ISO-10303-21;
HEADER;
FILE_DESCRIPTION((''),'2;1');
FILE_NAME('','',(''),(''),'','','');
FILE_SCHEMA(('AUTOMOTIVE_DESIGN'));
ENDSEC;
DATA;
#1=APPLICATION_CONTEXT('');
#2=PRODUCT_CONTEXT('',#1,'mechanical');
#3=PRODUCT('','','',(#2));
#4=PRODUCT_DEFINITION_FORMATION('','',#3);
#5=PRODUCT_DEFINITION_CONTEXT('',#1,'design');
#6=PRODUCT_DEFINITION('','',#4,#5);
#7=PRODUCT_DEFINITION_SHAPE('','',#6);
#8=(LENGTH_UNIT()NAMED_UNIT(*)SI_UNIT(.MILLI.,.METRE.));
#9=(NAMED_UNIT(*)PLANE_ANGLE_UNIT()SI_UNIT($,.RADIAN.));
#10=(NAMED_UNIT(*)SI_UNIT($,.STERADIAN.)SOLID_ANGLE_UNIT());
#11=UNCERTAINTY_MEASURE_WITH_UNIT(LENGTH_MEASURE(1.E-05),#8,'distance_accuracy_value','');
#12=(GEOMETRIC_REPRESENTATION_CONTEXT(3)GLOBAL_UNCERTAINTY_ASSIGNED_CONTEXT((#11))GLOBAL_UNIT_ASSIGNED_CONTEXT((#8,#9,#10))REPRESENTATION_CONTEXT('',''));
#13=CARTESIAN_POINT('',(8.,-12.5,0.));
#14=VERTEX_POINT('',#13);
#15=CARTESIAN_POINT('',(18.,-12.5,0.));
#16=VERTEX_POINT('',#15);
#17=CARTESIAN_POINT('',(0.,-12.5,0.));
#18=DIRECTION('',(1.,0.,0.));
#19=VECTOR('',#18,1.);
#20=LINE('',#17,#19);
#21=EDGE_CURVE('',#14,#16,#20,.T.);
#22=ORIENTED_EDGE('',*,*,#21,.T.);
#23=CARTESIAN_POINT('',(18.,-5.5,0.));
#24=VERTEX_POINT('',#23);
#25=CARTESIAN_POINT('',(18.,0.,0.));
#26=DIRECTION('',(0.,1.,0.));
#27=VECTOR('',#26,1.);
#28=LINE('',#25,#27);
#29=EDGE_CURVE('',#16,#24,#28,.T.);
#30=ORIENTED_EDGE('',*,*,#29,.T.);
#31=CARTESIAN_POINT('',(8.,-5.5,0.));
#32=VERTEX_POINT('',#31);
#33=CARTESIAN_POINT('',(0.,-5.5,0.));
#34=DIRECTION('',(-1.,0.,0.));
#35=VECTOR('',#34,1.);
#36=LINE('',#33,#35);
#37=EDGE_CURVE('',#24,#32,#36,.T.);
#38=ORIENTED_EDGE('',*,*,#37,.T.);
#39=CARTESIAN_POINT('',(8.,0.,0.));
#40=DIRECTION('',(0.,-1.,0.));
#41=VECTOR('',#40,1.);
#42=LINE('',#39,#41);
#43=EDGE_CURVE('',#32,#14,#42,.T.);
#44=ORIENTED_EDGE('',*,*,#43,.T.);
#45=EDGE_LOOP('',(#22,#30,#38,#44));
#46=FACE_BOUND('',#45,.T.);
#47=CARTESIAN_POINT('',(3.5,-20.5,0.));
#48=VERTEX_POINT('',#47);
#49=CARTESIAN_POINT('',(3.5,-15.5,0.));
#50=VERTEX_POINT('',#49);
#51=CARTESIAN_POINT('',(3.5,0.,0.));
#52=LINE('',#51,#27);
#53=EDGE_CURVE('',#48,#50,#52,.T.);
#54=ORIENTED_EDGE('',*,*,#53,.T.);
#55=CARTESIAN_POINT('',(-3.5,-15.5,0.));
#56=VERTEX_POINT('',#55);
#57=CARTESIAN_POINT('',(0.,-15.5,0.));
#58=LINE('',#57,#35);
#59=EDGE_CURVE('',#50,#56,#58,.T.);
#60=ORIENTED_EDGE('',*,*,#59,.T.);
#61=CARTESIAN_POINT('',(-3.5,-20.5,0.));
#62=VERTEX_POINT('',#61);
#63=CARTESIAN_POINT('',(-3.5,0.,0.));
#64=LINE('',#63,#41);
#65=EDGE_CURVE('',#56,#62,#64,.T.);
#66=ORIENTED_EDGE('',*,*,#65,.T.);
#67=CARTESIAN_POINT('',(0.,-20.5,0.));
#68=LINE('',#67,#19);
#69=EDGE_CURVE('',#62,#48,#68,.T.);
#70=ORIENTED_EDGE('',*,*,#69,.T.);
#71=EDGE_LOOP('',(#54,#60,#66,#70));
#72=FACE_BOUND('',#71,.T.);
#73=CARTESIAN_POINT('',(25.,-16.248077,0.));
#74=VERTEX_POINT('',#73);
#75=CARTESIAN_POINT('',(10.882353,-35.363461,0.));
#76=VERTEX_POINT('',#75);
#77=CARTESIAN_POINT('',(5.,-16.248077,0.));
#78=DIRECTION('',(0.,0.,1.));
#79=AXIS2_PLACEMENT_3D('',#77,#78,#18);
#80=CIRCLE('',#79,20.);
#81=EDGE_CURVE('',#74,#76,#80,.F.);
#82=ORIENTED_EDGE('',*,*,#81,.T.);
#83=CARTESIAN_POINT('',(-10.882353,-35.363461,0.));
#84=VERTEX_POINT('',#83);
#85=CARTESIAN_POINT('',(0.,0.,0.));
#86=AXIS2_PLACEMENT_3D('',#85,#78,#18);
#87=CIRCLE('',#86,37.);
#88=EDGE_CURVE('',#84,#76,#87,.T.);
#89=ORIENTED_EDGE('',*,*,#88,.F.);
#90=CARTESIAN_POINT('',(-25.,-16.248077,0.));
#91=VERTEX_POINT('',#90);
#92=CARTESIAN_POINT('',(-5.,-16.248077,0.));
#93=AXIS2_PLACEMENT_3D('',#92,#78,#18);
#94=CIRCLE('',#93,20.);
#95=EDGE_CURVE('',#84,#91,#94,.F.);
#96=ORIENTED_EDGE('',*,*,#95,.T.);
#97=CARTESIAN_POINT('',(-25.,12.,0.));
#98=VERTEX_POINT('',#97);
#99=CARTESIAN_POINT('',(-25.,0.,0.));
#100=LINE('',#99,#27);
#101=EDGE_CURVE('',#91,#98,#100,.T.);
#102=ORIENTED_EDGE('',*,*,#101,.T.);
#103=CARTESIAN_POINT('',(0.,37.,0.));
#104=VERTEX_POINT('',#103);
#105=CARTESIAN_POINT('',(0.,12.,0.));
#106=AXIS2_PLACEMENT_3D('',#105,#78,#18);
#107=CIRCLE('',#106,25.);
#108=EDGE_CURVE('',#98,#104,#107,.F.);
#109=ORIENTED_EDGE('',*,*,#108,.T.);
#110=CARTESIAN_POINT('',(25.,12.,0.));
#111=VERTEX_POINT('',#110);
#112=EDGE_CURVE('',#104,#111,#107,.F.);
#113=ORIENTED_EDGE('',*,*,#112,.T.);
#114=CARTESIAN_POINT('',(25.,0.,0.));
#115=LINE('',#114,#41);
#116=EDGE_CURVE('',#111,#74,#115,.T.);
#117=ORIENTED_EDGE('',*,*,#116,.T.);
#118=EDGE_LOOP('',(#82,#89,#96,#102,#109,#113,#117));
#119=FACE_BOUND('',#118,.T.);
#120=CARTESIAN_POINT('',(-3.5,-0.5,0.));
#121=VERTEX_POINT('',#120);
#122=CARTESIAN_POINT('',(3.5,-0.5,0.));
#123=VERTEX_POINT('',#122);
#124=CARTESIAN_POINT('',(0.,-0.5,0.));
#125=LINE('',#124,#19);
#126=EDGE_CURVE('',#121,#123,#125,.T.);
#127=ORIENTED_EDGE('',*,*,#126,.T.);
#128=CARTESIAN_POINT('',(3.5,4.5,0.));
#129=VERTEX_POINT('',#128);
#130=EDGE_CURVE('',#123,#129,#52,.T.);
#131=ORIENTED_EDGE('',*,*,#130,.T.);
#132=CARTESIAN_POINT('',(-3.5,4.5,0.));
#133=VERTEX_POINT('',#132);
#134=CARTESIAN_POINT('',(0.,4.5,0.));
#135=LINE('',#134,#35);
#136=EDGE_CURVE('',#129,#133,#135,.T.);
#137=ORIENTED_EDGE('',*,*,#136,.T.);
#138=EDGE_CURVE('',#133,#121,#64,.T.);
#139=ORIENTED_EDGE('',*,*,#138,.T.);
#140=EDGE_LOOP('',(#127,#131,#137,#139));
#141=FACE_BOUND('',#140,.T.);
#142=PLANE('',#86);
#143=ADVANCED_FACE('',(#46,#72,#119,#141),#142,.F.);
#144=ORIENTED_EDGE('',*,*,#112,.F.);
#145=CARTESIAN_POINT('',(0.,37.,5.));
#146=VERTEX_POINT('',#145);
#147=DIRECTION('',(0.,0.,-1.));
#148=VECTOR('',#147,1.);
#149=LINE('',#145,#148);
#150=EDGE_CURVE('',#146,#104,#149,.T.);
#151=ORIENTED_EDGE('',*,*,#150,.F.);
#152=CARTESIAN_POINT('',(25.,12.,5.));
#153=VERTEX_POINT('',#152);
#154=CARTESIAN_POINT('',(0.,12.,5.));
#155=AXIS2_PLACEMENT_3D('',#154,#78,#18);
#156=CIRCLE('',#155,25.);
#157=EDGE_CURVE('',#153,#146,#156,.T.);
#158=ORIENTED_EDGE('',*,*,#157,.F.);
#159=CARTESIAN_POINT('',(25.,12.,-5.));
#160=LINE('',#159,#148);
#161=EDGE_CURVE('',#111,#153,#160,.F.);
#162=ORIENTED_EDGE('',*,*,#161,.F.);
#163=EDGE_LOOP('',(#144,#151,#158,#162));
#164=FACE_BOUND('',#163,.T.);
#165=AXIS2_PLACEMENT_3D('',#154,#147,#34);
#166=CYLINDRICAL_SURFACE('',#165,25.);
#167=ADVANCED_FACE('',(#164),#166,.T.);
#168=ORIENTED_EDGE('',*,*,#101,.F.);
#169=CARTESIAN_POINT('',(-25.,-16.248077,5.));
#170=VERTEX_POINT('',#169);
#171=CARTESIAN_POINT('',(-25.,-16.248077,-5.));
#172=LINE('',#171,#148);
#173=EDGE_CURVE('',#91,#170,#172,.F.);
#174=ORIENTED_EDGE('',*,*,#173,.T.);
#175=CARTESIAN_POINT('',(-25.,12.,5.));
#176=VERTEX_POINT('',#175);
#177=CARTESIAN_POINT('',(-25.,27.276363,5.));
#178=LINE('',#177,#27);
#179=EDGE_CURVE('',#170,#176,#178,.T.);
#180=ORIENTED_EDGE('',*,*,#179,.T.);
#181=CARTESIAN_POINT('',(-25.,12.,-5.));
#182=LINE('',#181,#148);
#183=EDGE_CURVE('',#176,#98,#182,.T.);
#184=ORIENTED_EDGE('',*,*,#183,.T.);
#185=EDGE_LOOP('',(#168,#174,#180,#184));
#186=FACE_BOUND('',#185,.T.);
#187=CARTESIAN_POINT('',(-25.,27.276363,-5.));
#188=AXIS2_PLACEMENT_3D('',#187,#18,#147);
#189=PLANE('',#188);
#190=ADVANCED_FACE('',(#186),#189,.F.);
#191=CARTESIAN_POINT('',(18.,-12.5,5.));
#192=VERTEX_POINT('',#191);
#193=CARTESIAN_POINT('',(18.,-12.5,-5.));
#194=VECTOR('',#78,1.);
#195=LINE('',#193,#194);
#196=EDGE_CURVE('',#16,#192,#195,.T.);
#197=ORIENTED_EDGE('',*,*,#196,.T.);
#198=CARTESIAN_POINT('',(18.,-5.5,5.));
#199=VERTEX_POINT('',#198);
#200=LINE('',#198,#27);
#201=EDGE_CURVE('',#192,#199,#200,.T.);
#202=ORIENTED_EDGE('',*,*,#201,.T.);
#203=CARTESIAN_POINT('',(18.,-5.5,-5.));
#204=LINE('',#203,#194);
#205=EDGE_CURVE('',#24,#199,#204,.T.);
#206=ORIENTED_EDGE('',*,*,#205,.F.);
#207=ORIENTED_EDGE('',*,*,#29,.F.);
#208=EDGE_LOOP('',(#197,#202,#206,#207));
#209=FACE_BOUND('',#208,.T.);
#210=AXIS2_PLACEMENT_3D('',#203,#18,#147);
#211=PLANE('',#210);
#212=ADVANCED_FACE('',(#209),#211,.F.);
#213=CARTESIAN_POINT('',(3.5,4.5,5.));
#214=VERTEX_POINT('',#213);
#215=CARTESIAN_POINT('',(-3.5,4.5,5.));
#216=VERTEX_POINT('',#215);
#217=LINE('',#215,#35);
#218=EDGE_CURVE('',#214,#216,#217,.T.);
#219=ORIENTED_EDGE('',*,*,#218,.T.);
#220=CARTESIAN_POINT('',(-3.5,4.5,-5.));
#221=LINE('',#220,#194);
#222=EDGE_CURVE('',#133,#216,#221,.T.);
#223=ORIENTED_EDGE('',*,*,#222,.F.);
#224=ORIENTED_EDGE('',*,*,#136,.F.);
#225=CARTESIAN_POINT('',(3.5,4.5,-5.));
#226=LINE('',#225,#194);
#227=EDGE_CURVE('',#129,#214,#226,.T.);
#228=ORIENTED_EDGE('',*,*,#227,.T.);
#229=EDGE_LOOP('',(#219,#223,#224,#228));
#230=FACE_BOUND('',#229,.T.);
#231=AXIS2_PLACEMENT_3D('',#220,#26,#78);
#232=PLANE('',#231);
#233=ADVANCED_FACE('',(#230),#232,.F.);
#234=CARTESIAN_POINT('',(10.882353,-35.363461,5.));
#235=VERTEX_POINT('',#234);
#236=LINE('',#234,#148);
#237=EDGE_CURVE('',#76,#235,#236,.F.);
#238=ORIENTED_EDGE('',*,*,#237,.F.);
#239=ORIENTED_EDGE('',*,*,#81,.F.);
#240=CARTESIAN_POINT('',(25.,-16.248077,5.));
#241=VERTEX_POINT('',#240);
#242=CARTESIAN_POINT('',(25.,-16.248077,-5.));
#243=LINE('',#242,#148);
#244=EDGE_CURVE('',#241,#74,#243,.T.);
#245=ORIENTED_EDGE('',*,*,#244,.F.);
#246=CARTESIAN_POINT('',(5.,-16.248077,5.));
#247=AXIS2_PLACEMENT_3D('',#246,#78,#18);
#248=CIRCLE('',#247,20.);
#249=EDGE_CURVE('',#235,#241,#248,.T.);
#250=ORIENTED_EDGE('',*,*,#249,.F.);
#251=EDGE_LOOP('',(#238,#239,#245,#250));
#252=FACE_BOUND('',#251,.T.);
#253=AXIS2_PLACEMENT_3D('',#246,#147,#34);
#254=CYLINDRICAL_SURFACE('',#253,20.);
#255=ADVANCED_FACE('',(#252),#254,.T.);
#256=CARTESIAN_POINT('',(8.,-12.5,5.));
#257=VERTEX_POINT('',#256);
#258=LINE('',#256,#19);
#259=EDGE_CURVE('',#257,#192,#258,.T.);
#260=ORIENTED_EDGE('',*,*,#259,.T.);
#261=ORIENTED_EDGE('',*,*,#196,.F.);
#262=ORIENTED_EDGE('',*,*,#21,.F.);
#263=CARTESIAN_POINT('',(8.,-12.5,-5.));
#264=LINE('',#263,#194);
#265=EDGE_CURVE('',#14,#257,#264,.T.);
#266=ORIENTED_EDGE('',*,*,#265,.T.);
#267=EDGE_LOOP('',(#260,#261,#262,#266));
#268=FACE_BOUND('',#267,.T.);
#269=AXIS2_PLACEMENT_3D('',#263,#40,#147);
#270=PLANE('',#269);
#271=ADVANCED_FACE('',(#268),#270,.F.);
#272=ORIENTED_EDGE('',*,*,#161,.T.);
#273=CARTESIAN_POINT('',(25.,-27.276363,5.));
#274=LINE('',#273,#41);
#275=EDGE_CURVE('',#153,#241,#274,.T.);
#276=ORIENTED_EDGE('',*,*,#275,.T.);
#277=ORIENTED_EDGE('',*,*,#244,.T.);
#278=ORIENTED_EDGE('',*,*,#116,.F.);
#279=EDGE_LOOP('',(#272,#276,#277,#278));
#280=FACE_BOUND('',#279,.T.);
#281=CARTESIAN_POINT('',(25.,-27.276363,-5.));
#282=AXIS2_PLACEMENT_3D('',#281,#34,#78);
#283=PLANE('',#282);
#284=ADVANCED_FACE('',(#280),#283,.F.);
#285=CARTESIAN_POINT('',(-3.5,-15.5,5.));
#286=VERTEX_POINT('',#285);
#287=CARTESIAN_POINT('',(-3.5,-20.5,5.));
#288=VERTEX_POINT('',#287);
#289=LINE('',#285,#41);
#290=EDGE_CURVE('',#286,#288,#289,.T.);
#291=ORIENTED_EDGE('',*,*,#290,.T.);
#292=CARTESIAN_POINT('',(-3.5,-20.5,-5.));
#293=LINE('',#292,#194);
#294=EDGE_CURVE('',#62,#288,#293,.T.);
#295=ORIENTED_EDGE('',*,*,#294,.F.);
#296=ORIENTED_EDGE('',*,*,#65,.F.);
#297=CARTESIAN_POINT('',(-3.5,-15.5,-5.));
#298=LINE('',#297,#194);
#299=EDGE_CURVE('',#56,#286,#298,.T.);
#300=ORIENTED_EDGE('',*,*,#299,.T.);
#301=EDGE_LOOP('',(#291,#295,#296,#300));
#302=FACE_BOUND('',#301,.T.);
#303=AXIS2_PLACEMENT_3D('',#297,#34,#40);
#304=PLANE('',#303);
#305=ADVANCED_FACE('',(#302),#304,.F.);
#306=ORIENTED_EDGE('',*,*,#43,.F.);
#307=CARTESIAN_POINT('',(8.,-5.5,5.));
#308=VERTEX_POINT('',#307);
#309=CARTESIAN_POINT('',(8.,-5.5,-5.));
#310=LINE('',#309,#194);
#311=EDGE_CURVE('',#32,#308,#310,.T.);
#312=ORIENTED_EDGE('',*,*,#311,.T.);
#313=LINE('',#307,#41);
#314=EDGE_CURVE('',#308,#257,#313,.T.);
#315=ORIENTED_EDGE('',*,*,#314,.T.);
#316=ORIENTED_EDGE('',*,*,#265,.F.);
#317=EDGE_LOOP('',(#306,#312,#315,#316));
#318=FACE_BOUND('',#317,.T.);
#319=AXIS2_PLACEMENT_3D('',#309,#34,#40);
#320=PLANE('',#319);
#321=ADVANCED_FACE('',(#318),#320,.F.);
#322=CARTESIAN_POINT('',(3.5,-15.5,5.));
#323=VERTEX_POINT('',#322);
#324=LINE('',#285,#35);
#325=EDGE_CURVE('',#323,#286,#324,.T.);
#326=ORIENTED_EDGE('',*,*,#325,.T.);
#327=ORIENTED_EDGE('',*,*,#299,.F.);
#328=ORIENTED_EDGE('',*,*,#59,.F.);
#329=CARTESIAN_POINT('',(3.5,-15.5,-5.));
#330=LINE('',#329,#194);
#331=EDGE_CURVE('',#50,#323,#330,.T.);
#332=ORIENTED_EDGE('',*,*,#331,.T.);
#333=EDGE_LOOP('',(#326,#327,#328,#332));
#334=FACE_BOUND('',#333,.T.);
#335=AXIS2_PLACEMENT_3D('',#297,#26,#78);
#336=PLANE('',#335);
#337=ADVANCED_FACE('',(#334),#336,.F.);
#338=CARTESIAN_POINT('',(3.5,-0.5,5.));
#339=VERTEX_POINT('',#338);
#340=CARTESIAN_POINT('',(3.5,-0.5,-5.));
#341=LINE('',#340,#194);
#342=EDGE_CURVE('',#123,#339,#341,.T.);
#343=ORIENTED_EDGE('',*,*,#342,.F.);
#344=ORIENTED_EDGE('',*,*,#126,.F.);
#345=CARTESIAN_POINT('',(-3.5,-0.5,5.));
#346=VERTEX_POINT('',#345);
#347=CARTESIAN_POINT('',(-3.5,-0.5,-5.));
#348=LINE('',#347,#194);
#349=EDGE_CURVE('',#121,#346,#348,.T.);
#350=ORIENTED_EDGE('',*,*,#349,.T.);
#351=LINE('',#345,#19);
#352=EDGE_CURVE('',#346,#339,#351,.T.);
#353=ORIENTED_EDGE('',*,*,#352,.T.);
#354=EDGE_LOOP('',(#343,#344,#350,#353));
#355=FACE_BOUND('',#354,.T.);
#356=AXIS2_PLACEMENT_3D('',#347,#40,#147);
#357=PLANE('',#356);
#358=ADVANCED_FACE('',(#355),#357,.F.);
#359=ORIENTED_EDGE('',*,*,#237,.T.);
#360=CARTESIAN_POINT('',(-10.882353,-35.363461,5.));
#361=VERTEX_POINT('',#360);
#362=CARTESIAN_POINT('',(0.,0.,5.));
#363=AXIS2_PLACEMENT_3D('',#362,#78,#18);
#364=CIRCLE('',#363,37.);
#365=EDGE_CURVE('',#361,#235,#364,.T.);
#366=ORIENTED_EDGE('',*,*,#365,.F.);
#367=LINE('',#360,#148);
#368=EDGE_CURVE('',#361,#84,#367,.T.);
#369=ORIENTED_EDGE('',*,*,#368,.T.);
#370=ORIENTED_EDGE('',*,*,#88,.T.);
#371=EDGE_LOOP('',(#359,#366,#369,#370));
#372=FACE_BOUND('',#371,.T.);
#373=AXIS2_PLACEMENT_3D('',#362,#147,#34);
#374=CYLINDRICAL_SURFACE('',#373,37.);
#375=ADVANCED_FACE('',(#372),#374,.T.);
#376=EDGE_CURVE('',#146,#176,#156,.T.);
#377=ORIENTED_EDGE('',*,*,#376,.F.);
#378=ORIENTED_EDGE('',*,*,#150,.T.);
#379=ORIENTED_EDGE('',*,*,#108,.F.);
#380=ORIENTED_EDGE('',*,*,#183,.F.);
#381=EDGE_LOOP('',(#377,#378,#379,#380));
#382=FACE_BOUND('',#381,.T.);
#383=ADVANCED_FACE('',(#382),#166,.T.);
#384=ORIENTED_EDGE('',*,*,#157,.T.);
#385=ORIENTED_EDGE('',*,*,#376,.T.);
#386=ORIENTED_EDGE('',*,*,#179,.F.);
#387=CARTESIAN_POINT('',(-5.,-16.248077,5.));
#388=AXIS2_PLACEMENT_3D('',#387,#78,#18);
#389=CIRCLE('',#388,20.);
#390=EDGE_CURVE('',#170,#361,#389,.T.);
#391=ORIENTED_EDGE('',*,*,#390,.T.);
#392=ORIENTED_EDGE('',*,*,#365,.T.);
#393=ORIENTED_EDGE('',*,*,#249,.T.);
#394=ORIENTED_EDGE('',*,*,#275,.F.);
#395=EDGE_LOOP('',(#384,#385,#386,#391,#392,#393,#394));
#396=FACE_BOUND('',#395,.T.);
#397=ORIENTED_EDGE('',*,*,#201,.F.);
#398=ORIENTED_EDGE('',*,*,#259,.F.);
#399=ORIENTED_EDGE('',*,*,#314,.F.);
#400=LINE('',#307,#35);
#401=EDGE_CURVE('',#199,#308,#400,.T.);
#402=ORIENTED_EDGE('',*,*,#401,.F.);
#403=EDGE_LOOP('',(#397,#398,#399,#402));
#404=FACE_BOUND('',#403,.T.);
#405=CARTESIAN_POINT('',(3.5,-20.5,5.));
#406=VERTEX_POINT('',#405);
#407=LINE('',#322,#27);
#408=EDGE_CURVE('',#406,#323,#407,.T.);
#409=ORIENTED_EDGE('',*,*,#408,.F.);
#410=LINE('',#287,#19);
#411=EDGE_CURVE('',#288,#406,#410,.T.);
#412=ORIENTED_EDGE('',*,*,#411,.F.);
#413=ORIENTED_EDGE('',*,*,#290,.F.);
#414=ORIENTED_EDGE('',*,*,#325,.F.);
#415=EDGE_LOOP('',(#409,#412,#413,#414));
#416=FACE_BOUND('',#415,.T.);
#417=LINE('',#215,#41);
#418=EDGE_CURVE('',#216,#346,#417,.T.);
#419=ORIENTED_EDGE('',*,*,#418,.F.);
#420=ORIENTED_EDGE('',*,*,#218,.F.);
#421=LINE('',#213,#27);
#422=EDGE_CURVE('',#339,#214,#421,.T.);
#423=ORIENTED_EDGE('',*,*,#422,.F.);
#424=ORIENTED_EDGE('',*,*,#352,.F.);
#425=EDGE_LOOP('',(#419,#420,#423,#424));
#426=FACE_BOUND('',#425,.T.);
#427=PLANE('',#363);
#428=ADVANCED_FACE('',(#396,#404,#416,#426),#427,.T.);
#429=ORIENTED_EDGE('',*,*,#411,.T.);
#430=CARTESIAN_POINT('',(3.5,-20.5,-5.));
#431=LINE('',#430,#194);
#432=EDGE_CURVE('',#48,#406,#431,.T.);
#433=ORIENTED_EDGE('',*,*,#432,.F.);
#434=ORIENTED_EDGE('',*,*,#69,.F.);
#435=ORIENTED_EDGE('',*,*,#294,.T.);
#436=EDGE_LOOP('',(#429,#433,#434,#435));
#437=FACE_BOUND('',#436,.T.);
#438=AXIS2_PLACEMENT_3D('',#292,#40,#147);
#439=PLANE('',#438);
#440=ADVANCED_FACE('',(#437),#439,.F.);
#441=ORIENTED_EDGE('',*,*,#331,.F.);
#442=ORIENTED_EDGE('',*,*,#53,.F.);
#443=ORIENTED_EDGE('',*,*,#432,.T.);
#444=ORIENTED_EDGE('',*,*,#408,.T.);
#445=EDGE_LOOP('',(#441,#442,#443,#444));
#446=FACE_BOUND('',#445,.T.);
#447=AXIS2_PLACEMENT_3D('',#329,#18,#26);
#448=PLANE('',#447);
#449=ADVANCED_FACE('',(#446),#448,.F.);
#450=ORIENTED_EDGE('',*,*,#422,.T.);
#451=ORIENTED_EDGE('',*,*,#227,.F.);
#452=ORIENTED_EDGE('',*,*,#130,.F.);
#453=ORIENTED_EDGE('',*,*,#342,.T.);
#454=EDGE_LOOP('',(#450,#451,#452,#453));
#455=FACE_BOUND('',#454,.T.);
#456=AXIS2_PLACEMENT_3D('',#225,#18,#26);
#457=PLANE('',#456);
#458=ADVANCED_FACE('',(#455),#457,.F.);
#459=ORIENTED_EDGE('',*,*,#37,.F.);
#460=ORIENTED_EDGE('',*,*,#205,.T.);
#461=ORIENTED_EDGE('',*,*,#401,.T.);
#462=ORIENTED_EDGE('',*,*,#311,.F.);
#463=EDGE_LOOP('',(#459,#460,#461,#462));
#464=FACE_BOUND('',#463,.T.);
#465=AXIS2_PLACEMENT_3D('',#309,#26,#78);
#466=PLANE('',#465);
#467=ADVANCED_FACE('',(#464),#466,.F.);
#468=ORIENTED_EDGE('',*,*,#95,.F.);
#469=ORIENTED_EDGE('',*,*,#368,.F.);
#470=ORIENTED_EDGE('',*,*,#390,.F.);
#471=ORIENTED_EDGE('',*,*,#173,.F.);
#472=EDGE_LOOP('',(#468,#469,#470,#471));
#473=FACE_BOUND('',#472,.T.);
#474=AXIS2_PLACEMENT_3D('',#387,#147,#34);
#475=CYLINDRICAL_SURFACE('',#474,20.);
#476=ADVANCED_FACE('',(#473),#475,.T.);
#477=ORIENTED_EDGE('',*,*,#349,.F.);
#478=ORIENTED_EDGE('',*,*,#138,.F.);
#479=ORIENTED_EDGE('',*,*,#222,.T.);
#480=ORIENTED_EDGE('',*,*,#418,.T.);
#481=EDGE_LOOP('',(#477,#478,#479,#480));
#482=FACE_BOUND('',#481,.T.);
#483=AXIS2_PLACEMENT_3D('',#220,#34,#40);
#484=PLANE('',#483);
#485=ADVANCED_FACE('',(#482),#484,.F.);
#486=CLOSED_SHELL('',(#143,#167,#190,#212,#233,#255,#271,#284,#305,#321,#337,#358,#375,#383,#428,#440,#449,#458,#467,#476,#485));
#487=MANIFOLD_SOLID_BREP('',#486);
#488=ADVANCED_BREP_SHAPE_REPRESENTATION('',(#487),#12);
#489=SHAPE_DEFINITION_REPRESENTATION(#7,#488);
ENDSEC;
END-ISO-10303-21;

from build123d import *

# Parameters (mm, degrees)
SKETCH1_R           = 37
BOSS_EXTRUDE1_DEPTH = 5
CUT_EXTRUDE3_START  = -10
CUT_EXTRUDE3_DEPTH  = 10
FILLET1_R           = 25
FILLET2_R           = 20
SKETCH11_W          = 7
SKETCH11_H          = 5
CUT_EXTRUDE4_DEPTH  = 10
SKETCH12_W          = 10
SKETCH12_H          = 7
CUT_EXTRUDE5_DEPTH  = 10


with BuildPart() as part:
    # Sketch1 → Boss-Extrude1 (new body)
    with BuildSketch(Plane.XY):
        Circle(SKETCH1_R)
    extrude(amount=BOSS_EXTRUDE1_DEPTH)

    # Sketch10 → Cut-Extrude3 (cut)
    with BuildSketch(Plane.XY.offset(5).offset(CUT_EXTRUDE3_START)):
        with BuildLine():
            Line((-25, 27.276363394), (-25, -27.276363394))
            ThreePointArc((-25, -27.276363394), (-37, 0), (-25, 27.276363394))
        make_face()
        with BuildLine():
            Line((25, -27.276363394), (25, 27.276363394))
            ThreePointArc((25, 27.276363394), (37, 0), (25, -27.276363394))
        make_face()
    extrude(amount=CUT_EXTRUDE3_DEPTH, mode=Mode.SUBTRACT)

    # Fillet1
    fillet1_edges = [part.edges().sort_by_distance(p)[0] for p in [
        (-25, 27.276363394, 2.5),
        (25, 27.276363394, 2.5),
    ]]
    fillet(fillet1_edges, radius=FILLET1_R - 0.0001)  # a hair under: the kernel refuses the full size

    # Fillet2
    fillet2_edges = [part.edges().sort_by_distance(p)[0] for p in [
        (-25, -27.276363394, 2.5),
        (25, -27.276363394, 2.5),
    ]]
    fillet(fillet2_edges, radius=FILLET2_R)

    # Sketch11 → Cut-Extrude4 (cut)
    with BuildSketch(Plane.XY.offset(5)):
        with Locations((0, 2)):
            Rectangle(SKETCH11_W, SKETCH11_H)
        with Locations((0, -18)):
            Rectangle(SKETCH11_W, SKETCH11_H)
    extrude(amount=-CUT_EXTRUDE4_DEPTH, mode=Mode.SUBTRACT)

    # Sketch12 → Cut-Extrude5 (cut)
    with BuildSketch(Plane.XY.offset(5)):
        with Locations((13, -9)):
            Rectangle(SKETCH12_W, SKETCH12_H)
    extrude(amount=-CUT_EXTRUDE5_DEPTH, mode=Mode.SUBTRACT)


solid = part.part
